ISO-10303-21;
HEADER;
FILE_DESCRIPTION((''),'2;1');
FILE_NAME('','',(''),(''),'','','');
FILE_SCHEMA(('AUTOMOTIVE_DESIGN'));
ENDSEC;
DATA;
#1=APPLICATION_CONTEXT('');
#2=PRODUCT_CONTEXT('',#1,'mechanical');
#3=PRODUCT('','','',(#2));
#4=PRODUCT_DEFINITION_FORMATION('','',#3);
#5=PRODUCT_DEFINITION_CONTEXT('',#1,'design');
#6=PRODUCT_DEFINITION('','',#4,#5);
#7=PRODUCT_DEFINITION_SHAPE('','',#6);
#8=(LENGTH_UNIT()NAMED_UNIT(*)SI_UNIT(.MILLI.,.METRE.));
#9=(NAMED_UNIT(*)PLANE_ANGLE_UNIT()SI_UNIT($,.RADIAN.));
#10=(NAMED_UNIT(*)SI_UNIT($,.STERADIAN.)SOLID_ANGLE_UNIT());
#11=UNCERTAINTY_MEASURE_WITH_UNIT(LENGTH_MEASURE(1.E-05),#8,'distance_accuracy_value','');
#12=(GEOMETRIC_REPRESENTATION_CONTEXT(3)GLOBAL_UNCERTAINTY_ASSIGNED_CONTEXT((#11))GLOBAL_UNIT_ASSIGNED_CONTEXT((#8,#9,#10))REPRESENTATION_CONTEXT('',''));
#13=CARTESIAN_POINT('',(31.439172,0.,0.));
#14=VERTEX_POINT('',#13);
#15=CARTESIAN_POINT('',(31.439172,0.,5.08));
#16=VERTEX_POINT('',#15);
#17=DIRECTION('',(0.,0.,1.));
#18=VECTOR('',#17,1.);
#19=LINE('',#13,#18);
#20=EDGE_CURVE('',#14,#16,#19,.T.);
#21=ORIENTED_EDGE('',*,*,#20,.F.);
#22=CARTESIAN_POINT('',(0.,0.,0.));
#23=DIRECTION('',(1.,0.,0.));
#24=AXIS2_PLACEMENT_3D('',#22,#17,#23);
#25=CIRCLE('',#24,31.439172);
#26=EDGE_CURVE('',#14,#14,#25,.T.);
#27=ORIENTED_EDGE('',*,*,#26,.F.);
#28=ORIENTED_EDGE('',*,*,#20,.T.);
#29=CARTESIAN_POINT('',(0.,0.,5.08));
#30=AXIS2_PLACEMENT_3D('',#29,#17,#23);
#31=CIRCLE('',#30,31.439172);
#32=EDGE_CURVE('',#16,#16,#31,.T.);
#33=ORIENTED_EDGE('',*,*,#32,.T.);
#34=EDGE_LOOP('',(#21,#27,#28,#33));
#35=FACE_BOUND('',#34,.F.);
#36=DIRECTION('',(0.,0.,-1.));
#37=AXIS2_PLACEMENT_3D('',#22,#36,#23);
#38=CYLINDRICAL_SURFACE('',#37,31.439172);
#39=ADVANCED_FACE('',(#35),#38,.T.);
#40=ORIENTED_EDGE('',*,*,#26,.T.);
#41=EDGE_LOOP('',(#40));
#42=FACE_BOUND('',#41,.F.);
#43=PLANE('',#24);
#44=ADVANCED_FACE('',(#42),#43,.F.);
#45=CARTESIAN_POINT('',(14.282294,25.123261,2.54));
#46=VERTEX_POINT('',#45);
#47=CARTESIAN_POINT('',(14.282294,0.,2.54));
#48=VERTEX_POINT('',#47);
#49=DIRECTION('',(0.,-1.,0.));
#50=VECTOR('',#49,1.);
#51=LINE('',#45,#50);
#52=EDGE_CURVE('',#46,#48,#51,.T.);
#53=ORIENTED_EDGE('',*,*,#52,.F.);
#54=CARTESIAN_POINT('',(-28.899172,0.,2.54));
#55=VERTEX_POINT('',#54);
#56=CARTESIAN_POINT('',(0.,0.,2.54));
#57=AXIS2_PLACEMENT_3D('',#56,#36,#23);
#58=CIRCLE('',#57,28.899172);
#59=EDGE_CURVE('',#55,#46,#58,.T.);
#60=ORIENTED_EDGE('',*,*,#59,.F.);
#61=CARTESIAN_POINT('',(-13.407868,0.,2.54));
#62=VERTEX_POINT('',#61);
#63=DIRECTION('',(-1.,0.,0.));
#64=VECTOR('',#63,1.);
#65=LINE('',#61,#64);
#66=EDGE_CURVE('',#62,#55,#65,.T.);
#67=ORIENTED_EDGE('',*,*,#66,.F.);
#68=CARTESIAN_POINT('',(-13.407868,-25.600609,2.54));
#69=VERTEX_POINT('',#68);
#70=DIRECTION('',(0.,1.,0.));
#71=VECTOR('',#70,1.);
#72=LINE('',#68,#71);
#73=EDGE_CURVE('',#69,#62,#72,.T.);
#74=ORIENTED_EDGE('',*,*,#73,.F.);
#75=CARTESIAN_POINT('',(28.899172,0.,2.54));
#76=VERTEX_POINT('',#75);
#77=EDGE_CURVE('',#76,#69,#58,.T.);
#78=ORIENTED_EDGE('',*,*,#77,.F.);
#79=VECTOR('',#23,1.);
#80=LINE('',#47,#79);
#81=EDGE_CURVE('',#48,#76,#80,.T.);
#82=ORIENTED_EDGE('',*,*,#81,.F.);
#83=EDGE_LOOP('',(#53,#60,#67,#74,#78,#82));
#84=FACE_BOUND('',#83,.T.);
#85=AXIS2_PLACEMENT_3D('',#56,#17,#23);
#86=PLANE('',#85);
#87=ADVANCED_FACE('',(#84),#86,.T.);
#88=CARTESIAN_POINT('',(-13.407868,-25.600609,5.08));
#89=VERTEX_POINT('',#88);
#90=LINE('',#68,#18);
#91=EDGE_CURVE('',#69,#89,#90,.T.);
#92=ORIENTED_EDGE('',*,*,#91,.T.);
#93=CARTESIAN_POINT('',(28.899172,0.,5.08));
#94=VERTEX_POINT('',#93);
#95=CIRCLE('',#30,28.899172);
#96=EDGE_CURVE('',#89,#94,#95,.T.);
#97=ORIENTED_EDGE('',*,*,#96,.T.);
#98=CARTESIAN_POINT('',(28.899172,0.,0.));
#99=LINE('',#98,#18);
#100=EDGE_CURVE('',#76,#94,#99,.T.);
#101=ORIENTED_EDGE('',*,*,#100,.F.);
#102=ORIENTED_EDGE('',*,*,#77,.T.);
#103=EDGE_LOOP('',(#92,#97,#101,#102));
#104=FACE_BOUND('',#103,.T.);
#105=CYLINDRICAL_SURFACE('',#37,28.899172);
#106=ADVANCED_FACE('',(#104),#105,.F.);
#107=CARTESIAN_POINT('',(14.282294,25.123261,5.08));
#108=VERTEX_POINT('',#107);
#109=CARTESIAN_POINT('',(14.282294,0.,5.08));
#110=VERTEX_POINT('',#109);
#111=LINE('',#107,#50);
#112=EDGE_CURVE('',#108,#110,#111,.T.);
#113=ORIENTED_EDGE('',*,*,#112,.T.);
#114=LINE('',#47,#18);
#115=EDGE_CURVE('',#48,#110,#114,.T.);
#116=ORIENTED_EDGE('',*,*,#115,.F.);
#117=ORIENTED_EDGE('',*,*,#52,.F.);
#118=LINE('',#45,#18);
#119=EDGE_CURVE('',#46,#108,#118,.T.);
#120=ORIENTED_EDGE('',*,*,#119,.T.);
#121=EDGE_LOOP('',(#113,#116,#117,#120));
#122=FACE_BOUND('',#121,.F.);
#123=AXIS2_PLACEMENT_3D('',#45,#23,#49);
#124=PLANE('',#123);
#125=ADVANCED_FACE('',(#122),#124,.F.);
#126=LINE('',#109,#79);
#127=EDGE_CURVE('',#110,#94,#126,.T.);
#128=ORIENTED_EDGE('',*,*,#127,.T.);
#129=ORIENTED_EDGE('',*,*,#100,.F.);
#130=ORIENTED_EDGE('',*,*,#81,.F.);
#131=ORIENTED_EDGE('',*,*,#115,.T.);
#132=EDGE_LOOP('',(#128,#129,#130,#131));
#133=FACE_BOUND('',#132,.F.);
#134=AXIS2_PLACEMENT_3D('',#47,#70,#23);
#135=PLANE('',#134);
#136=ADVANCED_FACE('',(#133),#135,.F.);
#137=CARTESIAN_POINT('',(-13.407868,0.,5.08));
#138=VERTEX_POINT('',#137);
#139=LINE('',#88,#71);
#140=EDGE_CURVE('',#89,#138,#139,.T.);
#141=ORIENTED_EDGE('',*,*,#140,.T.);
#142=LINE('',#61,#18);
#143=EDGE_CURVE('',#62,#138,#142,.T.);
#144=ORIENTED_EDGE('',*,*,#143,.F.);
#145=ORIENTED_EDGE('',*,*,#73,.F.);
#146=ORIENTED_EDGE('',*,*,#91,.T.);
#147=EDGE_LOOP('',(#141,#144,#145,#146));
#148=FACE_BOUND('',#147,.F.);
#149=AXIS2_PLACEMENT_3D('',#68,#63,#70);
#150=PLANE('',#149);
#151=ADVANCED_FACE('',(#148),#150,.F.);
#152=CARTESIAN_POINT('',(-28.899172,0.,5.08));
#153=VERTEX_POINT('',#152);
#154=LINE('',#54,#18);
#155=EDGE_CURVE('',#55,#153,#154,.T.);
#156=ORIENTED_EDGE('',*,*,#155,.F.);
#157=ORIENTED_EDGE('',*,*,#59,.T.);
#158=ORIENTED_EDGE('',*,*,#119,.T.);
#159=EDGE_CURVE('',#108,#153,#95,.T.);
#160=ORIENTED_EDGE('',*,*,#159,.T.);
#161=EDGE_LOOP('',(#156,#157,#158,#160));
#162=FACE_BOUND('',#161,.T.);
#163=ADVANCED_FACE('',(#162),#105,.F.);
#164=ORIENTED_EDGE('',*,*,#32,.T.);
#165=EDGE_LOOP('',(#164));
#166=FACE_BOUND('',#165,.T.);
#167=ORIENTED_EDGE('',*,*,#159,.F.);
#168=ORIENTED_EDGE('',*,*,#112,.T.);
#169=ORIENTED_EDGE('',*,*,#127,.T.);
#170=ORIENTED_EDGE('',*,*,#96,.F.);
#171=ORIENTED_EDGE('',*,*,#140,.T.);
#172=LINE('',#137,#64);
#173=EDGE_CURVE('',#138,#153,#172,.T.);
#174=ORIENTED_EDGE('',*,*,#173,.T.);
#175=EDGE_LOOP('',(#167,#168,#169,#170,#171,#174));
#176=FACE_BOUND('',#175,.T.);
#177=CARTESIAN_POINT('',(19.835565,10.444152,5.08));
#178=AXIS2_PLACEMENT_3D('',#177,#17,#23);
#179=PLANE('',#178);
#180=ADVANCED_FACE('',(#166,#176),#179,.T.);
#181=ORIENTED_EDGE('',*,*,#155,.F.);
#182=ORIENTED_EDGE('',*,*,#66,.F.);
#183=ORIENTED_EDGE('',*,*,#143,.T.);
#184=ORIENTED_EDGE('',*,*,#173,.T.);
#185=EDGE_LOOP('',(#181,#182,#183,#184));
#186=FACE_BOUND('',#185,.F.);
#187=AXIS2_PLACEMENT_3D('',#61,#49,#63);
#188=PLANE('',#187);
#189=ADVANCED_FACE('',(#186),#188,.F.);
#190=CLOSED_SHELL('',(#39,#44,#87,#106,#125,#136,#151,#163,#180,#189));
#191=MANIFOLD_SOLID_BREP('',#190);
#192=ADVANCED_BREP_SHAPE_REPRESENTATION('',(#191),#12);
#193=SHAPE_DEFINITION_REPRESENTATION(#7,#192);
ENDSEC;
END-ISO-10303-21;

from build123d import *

# Parameters (mm, degrees)
F0_R     = 31.4391719437
F1_DEPTH = 5.08
F2_T     = -2.54
F4_DEPTH = 2.54


# Not quite as in the source:
# - a feature names something its author has since deleted; it is built from what else it names


with BuildPart() as f1:
    # F0 (on Top) → F1 (new body)
    with BuildSketch(Plane.XY):
        Circle(F0_R)
    extrude(amount=F1_DEPTH)

    # F2
    f2_openings = [f1.faces().sort_by_distance(p)[0] for p in [
        (0, 0, 5.08),
    ]]
    offset(amount=F2_T, openings=f2_openings)

    # F3 (on face) → F4 (join)
    with BuildSketch(Plane.XY.offset(2.54)):
        with BuildLine():
            Line((-13.4078683332, 0), (-28.8991719437, 0))
            ThreePointArc((-28.8991719437, 0), (-24.7248703878, -14.9613810638), (-13.4078683332, -25.6006094808))
            Line((-13.4078683332, -25.6006094808), (-13.4078683332, 0))
        make_face()
        with BuildLine():
            ThreePointArc((28.8991719437, 0), (24.9790772251, 14.5329914336), (14.2822936177, 25.1232606969))
            Line((14.2822936177, 25.1232606969), (14.2822936177, 0))
            Line((14.2822936177, 0), (28.8991719437, 0))
        make_face()
    extrude(amount=F4_DEPTH)


solid = f1.part
